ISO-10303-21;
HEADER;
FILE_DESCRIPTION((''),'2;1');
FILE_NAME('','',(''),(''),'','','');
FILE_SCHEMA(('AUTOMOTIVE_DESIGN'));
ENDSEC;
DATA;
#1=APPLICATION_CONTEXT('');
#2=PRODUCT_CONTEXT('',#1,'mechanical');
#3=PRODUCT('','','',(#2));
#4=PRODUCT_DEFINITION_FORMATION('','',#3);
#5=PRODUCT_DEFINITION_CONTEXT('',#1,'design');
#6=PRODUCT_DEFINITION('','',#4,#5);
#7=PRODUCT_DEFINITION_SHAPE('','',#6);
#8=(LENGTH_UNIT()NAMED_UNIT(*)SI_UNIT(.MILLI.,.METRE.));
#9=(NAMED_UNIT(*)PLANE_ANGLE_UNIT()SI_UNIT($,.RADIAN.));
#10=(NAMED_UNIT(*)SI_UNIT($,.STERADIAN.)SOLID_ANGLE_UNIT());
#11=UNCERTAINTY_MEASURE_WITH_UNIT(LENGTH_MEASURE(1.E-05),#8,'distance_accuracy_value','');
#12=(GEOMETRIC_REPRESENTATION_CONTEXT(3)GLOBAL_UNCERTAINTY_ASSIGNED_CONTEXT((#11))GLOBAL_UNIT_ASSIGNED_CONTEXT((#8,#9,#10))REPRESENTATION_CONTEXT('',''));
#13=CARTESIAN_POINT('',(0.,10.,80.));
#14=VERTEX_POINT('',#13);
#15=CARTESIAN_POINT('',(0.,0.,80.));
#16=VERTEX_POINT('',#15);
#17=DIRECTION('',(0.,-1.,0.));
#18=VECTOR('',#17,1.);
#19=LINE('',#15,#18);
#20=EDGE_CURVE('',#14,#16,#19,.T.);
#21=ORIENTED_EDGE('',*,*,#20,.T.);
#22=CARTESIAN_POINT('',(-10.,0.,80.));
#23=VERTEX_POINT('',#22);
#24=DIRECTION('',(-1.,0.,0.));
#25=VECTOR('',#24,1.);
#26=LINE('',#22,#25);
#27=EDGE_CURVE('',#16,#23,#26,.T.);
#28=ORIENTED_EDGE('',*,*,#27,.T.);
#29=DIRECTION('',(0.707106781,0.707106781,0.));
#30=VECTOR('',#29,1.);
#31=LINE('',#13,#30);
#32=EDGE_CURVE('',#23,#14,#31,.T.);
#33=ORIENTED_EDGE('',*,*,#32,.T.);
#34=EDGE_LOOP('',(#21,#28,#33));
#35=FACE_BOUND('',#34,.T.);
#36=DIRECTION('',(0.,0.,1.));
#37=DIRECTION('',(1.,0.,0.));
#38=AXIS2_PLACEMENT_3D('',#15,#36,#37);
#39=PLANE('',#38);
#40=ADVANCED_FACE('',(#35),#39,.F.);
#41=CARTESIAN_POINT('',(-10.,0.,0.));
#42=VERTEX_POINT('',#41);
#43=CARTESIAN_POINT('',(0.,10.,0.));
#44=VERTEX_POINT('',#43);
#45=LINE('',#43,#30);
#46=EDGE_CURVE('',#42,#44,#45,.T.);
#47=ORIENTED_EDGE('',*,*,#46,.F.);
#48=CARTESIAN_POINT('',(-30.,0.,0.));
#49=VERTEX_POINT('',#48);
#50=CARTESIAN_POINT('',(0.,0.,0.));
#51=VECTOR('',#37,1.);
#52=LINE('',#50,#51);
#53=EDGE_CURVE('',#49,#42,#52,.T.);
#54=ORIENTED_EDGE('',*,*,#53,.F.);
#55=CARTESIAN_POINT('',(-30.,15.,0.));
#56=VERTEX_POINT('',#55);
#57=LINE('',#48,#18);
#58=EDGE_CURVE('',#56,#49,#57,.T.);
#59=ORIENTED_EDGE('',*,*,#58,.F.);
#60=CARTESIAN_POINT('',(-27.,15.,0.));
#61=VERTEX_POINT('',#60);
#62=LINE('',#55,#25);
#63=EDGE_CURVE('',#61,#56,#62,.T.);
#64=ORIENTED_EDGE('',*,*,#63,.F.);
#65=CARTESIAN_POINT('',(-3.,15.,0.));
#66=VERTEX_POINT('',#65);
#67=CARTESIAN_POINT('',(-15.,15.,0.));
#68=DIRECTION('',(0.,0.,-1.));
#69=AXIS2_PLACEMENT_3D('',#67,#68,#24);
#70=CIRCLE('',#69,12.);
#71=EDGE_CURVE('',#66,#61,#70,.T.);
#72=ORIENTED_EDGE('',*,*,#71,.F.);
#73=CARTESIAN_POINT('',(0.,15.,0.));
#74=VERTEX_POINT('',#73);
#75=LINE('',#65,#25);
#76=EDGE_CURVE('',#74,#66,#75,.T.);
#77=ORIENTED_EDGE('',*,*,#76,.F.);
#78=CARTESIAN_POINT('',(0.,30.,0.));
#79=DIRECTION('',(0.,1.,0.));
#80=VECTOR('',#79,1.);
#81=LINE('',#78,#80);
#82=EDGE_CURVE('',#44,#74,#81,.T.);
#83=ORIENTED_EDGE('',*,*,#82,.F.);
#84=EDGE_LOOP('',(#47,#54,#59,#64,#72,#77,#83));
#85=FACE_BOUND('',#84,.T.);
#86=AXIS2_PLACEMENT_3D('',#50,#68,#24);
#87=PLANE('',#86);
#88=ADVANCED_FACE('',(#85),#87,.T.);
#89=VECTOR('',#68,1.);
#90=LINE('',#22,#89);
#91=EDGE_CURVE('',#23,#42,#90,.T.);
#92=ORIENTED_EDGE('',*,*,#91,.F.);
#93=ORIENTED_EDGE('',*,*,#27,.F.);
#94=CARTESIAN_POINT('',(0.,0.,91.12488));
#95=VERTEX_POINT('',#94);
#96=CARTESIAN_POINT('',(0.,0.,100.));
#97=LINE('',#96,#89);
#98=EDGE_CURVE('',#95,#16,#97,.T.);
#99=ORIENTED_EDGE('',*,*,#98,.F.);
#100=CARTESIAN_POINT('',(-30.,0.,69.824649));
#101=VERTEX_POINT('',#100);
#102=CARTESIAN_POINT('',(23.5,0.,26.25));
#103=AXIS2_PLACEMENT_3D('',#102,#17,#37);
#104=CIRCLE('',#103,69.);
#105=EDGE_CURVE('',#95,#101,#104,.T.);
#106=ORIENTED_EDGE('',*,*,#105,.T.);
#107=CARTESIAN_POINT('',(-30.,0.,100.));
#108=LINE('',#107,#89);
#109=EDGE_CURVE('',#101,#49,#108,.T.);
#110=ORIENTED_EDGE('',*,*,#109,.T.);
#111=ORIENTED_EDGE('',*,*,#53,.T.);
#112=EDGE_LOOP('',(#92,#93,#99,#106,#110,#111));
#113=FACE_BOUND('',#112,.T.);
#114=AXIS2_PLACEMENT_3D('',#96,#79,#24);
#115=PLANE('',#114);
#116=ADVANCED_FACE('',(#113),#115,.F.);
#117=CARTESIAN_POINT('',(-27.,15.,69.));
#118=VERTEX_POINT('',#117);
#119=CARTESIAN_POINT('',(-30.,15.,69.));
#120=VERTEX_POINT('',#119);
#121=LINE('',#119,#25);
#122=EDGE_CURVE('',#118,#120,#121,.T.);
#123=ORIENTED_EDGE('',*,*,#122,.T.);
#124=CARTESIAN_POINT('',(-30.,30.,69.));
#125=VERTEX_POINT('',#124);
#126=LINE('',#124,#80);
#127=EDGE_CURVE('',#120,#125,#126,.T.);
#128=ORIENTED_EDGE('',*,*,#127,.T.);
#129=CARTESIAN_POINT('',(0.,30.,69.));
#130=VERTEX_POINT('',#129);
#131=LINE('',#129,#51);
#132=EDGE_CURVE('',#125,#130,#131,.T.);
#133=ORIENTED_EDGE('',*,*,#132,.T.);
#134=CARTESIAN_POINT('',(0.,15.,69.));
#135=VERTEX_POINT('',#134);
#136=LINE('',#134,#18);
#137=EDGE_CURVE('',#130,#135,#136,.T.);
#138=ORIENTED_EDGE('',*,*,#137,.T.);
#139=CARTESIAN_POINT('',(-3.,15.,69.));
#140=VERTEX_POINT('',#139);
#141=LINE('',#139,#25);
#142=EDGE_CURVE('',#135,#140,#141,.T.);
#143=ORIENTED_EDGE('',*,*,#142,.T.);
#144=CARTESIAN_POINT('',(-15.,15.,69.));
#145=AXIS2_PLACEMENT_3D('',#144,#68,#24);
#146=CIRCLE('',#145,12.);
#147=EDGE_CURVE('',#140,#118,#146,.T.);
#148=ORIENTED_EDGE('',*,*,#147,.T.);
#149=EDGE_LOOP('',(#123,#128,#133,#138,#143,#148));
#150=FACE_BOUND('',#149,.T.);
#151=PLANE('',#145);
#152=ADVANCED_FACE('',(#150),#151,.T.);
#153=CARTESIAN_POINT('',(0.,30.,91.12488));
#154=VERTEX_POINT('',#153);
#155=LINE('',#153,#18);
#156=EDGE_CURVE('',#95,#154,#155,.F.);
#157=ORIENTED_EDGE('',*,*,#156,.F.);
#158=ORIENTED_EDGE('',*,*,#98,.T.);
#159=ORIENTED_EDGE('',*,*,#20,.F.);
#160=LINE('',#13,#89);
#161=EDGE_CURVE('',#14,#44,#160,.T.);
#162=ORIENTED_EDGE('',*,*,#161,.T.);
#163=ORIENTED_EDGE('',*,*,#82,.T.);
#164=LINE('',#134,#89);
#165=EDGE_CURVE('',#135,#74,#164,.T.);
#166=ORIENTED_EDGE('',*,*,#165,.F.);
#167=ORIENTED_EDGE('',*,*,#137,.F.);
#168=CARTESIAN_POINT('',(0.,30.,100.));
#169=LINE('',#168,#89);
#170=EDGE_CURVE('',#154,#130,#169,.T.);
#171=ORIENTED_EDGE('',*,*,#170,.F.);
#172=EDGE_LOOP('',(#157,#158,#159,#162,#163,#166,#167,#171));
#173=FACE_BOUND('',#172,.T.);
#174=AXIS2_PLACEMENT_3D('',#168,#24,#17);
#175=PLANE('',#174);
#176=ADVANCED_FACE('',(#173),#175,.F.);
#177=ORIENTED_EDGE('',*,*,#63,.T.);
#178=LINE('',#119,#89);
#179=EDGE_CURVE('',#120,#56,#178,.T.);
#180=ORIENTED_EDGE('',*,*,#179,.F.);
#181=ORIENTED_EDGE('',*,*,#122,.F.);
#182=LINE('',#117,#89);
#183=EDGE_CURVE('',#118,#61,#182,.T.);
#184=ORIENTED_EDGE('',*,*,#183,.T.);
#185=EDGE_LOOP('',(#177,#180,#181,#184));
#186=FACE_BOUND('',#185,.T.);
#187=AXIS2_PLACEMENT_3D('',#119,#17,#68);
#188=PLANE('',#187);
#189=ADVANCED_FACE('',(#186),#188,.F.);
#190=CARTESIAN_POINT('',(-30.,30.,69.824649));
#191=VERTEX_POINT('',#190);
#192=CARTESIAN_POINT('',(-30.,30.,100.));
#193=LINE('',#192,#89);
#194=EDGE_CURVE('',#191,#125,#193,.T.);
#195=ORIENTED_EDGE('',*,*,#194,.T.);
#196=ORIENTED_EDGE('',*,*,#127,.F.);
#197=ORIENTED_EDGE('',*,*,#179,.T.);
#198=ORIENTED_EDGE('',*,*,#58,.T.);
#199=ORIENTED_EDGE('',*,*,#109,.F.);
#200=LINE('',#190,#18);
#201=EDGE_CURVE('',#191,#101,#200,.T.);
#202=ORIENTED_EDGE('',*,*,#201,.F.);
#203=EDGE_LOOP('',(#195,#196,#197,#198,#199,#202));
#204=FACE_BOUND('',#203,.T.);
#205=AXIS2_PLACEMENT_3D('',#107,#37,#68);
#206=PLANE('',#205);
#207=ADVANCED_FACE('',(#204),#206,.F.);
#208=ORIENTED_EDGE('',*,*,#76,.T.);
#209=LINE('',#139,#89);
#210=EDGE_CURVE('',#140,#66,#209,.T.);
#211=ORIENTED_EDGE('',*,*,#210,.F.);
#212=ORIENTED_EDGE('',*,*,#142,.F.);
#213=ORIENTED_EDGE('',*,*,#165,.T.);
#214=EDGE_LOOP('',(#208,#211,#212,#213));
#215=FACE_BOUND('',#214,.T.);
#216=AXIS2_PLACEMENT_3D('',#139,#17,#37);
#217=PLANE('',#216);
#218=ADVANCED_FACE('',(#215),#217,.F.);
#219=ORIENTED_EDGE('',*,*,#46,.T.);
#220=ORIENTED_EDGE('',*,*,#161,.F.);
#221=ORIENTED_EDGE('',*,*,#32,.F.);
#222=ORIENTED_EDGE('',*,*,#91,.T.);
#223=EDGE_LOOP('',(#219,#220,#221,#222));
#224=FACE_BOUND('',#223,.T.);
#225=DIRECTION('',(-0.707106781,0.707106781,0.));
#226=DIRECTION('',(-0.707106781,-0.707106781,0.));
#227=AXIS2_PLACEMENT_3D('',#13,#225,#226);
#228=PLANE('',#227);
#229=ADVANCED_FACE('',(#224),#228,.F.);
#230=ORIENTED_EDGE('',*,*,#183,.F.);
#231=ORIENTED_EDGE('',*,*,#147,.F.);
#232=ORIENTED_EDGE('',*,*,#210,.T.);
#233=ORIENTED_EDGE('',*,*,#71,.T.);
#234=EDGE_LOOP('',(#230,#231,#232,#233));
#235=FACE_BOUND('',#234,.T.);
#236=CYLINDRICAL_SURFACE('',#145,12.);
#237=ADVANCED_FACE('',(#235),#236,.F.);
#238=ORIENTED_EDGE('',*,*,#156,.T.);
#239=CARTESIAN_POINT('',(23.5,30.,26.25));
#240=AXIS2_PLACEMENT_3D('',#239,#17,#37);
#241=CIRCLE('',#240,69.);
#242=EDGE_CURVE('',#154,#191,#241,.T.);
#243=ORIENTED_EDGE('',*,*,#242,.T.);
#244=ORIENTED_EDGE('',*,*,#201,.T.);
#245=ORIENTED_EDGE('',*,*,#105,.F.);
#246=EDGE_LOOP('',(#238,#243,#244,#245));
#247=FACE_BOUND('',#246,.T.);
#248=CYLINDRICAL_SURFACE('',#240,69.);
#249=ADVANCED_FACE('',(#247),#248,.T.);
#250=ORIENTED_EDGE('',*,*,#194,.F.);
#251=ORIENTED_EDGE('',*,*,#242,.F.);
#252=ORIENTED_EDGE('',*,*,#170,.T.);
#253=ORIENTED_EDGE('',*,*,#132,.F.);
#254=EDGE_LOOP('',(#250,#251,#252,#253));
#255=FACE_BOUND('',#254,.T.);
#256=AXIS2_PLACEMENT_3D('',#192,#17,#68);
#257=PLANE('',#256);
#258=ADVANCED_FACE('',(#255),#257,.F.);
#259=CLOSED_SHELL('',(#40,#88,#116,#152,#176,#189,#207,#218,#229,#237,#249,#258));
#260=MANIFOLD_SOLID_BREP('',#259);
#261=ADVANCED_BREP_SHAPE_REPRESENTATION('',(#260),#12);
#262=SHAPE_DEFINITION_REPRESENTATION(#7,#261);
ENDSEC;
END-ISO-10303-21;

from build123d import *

# Parameters (mm, degrees)
SKETCH2_W           = 30
SKETCH2_H           = 30
BOSS_EXTRUDE1_DEPTH = 100
CUT_EXTRUDE1_START  = -30
CUT_EXTRUDE1_DEPTH  = 30
CUT_EXTRUDE2_DEPTH  = 69
CUT_EXTRUDE3_DEPTH  = 80


# Read off the part's stored shape, not the designer's step: Cut-Extrude1
with BuildPart() as part:
    # Sketch2 → Boss-Extrude1 (new body)
    with BuildSketch(Plane.XY):
        with Locations((-15, 15)):
            Rectangle(SKETCH2_W, SKETCH2_H)
    extrude(amount=BOSS_EXTRUDE1_DEPTH)

    # Cut-Extrude1 outline → Cut-Extrude1 (cut)
    with BuildSketch(Plane.XZ.offset(CUT_EXTRUDE1_START)):
        with BuildLine():
            ThreePointArc((-30, 69.824648593), (-16.445900415, 82.511221459), (0, 91.124879576))
            Line((0, 91.124879576), (0, 100))
            Line((0, 100), (-30, 100))
            Line((-30, 100), (-30, 69.824648593))
        make_face()
    extrude(amount=CUT_EXTRUDE1_DEPTH, mode=Mode.SUBTRACT)

    # Sketch4 → Cut-Extrude2 (cut)
    with BuildSketch(Plane(origin=(0, 0, 0), x_dir=(-1, 0, 0), z_dir=(0, 0, -1))):
        with BuildLine():
            Line((3, 15), (0, 15))
            Line((0, 15), (0, 30))
            Line((0, 30), (30, 30))
            Line((30, 30), (30, 15))
            Line((30, 15), (27, 15))
            ThreePointArc((27, 15), (15, 3), (3, 15))
        make_face()
    extrude(amount=-CUT_EXTRUDE2_DEPTH, mode=Mode.SUBTRACT)

    # Sketch5 → Cut-Extrude3 (cut)
    with BuildSketch(Plane(origin=(0, 0, 0), x_dir=(-1, 0, 0), z_dir=(0, 0, -1))):
        Polygon((0, 0), (0, 10), (10, 0), align=None)
    extrude(amount=-CUT_EXTRUDE3_DEPTH, mode=Mode.SUBTRACT)


solid = part.part
